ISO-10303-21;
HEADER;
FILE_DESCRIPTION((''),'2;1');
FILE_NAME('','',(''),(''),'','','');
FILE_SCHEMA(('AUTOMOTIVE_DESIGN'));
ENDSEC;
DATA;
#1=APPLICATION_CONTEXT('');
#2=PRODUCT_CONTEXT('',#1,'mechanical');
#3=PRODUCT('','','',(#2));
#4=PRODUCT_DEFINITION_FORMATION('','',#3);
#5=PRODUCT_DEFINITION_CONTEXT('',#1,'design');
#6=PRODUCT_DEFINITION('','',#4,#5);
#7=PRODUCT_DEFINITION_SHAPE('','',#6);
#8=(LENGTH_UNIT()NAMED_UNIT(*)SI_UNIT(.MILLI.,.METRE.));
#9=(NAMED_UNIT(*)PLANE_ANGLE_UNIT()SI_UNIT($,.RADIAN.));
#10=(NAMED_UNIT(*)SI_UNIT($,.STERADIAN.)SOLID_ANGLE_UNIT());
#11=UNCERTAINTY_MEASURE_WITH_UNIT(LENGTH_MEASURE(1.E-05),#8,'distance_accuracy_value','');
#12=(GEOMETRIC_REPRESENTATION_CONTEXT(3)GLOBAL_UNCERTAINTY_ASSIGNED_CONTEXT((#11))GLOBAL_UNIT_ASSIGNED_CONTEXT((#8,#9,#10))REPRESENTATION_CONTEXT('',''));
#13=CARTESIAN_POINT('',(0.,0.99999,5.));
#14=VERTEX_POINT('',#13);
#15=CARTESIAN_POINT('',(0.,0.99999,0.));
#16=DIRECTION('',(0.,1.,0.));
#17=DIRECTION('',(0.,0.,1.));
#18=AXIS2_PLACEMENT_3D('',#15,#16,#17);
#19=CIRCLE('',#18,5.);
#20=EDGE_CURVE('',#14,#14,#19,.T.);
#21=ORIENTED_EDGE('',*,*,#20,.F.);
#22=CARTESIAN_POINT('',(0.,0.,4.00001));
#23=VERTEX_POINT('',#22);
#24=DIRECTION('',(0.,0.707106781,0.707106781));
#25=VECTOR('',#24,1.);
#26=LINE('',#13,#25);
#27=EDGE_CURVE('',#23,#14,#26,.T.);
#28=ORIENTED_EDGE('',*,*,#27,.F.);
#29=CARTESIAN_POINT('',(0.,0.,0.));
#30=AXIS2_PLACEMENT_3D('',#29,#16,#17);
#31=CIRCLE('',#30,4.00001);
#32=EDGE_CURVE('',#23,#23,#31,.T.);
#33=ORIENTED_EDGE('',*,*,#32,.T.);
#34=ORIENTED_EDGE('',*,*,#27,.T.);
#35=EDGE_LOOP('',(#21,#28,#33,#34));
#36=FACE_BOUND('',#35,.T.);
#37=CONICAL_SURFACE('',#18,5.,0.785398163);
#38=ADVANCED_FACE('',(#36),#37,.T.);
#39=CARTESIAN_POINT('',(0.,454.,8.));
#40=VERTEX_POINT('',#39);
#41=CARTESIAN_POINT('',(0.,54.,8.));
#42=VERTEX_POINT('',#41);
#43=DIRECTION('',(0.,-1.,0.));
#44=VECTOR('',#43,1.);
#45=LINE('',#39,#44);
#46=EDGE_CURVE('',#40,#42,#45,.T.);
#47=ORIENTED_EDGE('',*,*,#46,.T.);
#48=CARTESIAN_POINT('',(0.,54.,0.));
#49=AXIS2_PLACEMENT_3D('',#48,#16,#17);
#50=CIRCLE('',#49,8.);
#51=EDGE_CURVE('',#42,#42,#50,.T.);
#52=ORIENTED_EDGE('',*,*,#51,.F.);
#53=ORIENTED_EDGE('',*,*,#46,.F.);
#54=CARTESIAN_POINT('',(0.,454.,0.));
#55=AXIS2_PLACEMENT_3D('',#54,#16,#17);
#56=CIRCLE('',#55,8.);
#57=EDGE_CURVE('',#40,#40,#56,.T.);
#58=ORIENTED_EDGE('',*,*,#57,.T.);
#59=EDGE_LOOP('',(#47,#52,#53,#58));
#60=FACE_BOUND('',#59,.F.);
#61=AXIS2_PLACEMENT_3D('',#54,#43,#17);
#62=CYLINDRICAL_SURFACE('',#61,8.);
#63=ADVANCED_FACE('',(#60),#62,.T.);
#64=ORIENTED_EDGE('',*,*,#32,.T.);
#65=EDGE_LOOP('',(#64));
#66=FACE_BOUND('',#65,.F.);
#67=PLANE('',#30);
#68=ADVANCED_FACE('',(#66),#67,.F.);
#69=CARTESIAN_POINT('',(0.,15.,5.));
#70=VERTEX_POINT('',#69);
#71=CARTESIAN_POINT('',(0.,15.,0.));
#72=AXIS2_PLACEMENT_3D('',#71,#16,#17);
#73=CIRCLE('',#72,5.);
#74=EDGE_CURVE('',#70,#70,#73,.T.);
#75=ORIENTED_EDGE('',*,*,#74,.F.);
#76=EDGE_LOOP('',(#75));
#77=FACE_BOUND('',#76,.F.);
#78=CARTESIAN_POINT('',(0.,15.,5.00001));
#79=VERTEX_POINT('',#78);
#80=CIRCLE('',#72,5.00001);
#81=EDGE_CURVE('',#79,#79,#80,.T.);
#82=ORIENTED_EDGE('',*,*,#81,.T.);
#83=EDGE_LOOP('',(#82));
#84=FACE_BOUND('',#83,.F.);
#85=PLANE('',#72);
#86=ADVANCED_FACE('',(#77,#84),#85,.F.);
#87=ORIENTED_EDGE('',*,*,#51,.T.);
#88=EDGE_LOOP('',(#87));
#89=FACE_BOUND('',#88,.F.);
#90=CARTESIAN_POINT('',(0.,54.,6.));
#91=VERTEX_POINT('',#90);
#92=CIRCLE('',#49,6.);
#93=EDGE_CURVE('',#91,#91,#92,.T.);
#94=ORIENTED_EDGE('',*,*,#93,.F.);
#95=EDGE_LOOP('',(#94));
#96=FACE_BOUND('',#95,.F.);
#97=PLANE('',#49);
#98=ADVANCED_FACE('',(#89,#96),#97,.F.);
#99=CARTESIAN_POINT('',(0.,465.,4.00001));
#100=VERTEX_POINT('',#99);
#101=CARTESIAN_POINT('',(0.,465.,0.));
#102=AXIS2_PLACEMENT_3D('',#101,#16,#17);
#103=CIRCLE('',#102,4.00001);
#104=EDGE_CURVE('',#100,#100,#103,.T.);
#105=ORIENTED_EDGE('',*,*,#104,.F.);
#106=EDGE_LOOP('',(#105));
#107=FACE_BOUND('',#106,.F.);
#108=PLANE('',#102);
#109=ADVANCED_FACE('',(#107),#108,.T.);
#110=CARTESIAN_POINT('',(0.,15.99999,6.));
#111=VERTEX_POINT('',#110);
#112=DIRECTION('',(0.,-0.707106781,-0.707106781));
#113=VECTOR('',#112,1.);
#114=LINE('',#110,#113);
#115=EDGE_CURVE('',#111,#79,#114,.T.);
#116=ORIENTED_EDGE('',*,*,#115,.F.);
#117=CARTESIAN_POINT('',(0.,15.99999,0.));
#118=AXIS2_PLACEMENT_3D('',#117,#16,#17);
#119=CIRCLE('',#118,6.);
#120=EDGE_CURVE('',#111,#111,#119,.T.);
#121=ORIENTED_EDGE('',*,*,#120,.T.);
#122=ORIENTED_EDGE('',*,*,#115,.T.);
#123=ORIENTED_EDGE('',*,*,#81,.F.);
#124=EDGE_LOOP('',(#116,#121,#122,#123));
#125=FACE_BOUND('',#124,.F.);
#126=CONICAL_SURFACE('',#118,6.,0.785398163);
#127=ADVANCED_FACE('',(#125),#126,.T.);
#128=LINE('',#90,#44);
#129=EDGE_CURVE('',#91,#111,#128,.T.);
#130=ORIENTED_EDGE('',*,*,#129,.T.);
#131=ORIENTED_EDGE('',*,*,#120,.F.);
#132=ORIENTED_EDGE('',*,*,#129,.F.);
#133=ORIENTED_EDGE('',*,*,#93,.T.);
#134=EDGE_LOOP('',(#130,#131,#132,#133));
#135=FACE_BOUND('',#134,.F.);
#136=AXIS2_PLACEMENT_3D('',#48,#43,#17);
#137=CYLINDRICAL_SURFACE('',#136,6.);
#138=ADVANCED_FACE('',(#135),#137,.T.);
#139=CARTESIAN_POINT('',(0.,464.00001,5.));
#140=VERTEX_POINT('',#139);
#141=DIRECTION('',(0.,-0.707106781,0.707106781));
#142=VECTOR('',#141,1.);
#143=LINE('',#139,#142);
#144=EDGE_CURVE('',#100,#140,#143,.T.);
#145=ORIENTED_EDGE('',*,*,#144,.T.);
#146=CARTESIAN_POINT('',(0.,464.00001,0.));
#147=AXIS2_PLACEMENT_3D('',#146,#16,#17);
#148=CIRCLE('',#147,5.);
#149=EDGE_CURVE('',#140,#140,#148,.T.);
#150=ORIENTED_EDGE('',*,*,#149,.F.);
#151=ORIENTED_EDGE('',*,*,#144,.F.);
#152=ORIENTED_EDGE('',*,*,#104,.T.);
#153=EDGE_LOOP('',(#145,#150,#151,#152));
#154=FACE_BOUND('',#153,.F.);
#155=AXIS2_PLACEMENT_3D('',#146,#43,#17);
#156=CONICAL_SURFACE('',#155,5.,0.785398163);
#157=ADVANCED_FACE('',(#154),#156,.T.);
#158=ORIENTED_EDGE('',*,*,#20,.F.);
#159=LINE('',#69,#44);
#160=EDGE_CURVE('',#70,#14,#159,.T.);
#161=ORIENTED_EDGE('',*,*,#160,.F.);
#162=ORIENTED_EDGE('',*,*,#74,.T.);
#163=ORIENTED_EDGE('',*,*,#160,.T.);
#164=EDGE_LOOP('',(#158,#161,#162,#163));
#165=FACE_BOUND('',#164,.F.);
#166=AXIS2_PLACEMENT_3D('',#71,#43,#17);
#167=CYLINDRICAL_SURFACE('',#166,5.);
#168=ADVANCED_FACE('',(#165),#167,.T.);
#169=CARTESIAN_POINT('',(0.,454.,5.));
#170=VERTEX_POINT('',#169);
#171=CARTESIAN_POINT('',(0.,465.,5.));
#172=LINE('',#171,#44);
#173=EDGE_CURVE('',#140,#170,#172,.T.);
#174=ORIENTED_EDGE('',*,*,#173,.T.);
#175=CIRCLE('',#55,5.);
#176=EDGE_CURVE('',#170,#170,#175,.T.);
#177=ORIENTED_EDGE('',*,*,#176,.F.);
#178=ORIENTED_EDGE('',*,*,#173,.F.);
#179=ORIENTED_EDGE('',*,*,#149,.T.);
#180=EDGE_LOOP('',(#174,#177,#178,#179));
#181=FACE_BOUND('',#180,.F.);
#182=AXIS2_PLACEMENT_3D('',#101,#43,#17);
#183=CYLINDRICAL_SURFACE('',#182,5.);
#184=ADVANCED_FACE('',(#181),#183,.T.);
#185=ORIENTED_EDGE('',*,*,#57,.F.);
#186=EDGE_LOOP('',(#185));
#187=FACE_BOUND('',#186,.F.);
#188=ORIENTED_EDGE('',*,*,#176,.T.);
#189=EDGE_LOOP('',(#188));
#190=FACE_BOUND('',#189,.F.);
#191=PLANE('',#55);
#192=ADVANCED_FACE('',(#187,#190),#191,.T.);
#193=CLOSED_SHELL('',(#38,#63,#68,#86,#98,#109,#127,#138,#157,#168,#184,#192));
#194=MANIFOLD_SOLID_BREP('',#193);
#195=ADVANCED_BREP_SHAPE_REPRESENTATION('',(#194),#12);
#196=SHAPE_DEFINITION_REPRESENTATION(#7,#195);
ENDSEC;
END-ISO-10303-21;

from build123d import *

# Parameters (mm, degrees)
F2_SIZE = 0.99999


# Not quite as in the source:
# - a fillet or chamfer is up to 0.001 mm smaller than in the source, because OpenCascade refuses the exact size


with BuildPart() as f1:
    # F0 (on Right) → F1 (revolve)
    with BuildSketch(Plane.YZ):
        Polygon((0, 5), (0, 0), (465, 0), (465, 5), (454, 5), (454, 8), (54, 8), (54, 6), (15, 6), (15, 5), align=None)
    revolve(axis=Axis((0, 344.1624132916, 0), (0, 1, 0)))

    # F2 (size 1 in the source; OpenCascade refuses exactly that, so slightly less here)
    f2_edges = [f1.edges().sort_by_distance(p)[0] for p in [
        (0, 0, -5),
        (0, 15, -6),
        (0, 465, -5),
    ]]
    chamfer(f2_edges, length=F2_SIZE)


solid = f1.part
